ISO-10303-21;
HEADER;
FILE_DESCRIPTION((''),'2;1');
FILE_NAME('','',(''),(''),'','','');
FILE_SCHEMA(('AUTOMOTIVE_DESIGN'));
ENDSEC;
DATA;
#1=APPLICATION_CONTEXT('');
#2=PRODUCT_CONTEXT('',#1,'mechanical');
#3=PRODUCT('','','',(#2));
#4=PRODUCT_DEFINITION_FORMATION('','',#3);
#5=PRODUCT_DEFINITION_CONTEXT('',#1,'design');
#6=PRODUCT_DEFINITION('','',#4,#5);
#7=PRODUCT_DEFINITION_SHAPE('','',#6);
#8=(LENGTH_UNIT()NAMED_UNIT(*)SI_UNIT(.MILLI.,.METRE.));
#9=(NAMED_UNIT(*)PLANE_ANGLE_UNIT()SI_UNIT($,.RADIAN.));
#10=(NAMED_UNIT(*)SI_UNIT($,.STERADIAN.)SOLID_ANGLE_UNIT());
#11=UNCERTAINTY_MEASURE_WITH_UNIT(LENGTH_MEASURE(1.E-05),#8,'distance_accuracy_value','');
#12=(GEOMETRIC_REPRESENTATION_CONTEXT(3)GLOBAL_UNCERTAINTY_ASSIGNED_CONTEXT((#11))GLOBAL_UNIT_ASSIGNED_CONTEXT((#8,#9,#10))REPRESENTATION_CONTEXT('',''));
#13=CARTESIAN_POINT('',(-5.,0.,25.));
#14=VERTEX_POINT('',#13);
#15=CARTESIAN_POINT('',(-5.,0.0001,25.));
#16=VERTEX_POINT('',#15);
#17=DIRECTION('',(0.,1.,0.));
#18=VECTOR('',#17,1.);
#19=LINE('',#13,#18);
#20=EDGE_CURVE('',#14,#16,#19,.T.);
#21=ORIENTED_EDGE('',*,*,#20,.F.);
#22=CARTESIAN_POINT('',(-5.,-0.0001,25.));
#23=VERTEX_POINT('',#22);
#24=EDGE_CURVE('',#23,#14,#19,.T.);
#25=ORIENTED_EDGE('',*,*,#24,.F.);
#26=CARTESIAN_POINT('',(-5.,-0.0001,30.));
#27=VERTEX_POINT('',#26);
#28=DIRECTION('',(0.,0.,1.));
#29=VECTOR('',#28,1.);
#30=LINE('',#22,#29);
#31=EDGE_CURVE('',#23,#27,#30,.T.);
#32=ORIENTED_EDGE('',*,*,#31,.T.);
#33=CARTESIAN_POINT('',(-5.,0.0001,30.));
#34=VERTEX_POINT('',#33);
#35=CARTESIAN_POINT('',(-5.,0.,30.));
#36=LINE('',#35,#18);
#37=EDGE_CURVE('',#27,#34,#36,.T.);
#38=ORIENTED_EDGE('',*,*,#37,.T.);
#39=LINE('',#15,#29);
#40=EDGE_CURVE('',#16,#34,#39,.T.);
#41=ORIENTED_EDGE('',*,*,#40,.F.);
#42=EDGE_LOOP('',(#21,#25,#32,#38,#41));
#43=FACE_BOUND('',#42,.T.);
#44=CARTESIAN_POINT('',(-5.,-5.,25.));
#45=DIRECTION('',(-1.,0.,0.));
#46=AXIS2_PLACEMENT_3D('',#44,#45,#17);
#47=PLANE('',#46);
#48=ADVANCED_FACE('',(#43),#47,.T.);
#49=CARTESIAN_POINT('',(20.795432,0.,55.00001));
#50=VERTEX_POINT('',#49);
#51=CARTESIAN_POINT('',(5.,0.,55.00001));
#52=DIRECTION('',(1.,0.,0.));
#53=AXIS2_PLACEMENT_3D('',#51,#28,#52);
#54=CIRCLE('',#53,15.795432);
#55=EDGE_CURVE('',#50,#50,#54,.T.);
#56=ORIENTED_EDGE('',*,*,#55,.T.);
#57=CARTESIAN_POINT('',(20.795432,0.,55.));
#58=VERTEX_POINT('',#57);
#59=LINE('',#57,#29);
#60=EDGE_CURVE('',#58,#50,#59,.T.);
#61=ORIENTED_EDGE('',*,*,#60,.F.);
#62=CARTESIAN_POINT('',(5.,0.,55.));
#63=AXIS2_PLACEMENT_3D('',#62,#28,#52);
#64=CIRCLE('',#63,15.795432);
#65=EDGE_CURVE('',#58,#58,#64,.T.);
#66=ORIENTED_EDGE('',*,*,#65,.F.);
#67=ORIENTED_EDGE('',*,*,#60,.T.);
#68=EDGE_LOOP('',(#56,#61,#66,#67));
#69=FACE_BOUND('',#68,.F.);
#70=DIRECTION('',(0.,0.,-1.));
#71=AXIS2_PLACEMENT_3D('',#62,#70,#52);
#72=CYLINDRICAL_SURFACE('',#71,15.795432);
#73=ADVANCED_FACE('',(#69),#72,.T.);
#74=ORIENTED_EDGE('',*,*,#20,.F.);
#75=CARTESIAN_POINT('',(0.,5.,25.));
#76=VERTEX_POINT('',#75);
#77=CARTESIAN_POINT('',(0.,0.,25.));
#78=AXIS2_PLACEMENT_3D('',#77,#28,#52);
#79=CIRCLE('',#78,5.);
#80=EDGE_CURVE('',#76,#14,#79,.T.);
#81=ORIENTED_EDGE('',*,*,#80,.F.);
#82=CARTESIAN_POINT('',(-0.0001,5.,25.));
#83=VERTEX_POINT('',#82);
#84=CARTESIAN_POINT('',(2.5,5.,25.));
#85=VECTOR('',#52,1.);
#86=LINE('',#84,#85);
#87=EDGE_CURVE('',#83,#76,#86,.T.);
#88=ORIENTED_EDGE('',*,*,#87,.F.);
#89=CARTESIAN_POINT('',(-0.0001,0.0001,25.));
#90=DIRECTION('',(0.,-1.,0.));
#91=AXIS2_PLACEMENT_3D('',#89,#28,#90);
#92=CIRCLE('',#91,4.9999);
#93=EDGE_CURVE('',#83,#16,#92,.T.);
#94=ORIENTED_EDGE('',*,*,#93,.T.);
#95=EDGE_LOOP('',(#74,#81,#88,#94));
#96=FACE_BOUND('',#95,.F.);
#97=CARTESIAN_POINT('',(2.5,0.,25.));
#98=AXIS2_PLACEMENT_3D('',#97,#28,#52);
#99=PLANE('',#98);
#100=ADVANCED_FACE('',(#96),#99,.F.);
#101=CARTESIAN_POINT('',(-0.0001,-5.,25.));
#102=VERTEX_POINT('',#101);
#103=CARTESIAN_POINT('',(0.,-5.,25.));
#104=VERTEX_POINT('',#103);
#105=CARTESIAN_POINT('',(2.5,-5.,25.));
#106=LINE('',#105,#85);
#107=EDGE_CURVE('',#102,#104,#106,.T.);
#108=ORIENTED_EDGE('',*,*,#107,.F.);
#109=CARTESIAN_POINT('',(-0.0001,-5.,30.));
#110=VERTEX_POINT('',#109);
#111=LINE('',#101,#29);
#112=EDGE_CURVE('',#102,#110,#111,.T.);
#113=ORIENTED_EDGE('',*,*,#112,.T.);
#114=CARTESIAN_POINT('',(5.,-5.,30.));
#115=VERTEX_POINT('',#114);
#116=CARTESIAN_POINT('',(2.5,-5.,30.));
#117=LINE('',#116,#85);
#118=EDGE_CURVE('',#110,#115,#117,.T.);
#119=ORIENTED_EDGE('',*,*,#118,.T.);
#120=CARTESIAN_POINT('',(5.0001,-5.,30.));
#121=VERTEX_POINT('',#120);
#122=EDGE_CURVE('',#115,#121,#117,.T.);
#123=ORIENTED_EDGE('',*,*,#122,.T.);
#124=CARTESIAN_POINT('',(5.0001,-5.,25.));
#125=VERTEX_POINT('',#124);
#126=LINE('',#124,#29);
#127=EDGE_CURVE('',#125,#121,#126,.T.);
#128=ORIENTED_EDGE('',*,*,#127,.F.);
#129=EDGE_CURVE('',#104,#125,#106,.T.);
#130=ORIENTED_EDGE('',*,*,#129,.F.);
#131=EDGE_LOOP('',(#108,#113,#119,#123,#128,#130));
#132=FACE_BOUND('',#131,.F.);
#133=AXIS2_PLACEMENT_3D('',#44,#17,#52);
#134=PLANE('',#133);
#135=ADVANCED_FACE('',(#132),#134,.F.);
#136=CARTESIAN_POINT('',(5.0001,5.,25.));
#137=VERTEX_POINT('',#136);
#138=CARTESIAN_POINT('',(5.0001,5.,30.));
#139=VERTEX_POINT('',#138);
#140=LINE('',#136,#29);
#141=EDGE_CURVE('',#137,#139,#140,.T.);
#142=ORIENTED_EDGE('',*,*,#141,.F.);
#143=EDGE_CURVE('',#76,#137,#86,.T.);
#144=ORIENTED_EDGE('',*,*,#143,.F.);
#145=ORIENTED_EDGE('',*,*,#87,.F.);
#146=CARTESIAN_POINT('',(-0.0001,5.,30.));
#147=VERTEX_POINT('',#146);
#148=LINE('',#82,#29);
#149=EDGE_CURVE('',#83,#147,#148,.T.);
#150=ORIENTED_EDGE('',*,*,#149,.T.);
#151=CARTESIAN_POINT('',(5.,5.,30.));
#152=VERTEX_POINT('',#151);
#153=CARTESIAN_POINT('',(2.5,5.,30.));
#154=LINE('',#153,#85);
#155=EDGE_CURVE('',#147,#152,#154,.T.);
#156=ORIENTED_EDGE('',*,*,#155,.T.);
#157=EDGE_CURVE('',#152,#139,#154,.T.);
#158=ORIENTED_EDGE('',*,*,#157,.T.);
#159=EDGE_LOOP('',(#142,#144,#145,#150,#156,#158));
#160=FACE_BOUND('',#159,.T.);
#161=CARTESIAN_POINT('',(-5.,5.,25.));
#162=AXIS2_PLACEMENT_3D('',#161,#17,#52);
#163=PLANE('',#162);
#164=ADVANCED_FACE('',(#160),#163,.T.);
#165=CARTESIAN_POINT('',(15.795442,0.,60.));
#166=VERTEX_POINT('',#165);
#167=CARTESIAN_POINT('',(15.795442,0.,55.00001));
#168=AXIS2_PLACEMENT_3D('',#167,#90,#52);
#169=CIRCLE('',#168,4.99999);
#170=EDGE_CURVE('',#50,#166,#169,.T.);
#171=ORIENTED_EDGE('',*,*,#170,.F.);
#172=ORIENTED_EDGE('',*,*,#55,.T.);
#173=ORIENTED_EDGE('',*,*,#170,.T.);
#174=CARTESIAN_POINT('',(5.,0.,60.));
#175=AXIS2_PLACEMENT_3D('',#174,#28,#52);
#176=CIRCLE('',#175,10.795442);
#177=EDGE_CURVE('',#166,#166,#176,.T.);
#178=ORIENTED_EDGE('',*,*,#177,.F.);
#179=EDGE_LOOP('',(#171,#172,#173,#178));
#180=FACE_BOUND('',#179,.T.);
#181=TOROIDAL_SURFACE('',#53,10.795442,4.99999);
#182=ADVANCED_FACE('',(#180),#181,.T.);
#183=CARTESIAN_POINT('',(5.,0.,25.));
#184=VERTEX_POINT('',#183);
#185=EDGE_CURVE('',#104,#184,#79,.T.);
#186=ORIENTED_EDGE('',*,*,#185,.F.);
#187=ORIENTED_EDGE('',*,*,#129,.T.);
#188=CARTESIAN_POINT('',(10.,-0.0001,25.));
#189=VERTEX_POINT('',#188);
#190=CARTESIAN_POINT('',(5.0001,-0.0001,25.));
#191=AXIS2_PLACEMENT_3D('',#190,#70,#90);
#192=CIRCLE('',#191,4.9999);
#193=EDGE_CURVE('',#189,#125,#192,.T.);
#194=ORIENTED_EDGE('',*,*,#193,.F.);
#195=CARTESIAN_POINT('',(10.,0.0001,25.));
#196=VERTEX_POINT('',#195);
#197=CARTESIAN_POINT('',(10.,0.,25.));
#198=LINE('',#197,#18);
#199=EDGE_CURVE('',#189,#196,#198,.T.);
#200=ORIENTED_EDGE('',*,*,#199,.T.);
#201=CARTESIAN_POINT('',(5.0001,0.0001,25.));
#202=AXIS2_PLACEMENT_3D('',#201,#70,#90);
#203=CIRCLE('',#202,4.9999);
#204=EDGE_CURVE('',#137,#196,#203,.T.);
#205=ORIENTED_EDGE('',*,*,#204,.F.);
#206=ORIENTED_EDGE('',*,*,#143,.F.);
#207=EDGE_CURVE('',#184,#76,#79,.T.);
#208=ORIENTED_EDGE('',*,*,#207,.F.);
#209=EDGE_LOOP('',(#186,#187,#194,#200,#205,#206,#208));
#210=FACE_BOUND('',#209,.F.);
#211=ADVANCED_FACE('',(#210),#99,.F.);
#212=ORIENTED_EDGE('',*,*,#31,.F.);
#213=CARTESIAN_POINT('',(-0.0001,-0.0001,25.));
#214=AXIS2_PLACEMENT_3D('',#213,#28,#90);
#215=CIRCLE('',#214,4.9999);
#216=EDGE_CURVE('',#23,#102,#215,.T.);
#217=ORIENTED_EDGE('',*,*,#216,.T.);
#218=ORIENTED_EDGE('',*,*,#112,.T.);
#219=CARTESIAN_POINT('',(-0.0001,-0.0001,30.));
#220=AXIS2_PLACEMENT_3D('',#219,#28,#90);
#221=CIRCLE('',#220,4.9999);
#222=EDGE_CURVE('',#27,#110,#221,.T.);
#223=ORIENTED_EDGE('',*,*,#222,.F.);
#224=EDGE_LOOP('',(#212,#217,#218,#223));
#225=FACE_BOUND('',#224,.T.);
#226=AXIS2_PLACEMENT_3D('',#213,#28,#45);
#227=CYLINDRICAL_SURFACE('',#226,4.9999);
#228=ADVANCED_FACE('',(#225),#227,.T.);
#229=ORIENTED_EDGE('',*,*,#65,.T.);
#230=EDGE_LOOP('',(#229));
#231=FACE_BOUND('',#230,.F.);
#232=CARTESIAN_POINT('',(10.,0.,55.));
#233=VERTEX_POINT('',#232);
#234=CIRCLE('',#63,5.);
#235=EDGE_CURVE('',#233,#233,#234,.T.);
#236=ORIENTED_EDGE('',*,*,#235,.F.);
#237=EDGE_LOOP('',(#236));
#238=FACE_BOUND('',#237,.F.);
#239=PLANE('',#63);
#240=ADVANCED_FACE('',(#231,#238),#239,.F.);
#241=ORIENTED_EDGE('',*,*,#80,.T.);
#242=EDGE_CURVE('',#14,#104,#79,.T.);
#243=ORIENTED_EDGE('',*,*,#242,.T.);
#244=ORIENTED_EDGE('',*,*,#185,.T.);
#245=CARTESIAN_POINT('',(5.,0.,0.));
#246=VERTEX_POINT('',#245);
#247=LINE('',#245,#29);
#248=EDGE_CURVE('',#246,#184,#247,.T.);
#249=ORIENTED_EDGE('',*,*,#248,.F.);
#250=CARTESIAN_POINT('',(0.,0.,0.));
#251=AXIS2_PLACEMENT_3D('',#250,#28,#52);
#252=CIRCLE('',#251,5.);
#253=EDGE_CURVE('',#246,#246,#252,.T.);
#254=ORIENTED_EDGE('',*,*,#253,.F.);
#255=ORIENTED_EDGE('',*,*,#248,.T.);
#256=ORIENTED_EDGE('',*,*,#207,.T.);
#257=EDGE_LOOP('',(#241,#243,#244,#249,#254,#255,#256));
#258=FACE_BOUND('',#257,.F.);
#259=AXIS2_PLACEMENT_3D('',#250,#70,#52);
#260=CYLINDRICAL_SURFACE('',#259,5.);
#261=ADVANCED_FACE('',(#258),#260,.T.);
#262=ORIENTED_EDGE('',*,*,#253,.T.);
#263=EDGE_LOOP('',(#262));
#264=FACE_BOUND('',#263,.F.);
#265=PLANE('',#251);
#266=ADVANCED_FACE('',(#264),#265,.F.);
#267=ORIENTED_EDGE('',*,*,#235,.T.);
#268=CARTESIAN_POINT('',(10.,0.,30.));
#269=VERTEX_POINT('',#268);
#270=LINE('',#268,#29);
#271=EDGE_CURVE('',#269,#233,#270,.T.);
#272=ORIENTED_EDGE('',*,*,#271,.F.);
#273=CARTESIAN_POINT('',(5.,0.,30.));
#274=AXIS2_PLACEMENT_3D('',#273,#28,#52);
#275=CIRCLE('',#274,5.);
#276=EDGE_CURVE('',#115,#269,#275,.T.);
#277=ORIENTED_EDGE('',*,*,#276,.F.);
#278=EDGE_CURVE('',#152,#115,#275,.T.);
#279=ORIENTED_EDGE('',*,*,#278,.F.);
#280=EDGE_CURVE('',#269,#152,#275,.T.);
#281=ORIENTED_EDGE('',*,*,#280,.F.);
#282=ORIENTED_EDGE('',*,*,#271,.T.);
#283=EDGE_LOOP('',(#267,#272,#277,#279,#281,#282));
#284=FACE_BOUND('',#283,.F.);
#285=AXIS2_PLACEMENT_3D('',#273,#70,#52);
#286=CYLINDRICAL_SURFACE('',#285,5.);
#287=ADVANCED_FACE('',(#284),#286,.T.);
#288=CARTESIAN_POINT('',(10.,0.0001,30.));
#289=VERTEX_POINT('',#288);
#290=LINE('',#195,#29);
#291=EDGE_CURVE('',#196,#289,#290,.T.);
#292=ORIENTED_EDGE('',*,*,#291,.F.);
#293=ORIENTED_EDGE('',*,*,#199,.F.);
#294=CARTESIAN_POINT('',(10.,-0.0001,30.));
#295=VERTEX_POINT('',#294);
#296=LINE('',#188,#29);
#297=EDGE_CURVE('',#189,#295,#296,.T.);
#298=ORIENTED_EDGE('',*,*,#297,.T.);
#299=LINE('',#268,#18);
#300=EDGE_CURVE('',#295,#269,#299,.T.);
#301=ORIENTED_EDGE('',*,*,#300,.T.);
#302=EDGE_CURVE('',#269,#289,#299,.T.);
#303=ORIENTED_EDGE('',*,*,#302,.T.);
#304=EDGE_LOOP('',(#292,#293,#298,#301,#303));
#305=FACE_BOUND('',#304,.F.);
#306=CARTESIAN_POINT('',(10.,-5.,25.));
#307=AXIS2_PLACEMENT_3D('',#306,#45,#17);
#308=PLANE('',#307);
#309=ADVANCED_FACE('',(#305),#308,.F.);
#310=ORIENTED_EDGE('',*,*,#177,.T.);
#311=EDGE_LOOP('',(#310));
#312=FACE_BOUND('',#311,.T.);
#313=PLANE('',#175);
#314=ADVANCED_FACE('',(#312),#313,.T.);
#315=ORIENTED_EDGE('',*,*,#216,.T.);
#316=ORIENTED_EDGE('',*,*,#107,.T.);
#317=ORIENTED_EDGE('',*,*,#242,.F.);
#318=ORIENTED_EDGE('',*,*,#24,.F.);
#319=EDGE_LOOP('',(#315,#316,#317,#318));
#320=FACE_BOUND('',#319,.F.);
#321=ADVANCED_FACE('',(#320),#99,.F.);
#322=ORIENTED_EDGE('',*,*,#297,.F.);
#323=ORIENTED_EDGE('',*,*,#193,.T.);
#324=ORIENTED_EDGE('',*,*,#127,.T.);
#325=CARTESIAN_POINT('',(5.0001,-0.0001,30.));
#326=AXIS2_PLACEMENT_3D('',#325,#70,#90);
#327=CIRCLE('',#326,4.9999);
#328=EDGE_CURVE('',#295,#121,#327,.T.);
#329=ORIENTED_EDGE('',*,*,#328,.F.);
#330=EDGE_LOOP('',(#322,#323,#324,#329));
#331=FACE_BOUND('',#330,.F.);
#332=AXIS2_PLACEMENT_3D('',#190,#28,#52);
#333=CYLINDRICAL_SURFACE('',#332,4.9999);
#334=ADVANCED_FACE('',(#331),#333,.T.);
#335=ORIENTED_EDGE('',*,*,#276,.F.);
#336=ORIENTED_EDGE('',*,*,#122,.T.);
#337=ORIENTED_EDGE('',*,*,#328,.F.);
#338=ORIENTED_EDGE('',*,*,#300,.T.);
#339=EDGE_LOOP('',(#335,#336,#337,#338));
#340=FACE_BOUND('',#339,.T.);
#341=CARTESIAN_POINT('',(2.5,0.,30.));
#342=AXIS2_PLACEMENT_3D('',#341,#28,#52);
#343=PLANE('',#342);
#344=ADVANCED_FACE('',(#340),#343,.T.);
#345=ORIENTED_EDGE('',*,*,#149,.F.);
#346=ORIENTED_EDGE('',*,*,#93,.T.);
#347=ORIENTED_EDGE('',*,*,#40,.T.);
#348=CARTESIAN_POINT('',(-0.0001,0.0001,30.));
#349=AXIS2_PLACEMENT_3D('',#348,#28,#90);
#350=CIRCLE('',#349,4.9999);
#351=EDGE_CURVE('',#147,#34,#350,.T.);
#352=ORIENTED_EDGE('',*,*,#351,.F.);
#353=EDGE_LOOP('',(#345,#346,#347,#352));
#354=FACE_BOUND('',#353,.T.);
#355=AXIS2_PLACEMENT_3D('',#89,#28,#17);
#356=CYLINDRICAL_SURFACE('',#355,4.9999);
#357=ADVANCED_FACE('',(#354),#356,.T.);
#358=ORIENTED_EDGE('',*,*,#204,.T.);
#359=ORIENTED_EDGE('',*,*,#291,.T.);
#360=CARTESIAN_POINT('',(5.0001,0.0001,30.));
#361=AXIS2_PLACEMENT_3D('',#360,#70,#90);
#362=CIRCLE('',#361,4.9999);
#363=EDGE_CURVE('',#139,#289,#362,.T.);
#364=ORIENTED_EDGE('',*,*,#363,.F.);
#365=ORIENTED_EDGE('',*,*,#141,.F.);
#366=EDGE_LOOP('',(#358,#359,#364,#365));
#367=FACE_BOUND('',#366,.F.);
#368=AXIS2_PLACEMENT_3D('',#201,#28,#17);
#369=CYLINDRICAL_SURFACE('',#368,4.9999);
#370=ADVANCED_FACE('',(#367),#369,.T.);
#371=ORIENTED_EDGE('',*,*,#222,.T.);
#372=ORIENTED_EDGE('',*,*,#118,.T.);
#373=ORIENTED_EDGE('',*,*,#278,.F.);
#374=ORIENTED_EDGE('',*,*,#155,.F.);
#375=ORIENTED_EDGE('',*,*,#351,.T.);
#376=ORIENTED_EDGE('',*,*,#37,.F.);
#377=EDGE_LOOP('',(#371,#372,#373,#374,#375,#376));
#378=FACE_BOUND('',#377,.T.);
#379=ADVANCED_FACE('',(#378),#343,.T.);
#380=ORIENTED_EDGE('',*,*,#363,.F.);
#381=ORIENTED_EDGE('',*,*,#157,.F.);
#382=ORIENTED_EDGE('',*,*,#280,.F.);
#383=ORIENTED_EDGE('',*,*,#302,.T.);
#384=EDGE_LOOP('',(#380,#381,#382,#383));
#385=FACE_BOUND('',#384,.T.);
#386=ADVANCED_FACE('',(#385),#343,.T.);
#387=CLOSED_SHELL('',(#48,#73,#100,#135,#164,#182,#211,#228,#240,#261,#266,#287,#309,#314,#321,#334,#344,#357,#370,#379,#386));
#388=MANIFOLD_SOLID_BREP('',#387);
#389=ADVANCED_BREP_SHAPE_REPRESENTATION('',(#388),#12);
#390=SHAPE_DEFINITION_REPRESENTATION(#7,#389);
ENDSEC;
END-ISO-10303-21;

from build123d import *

# Parameters (mm, degrees)
F0_R     = 5
F1_DEPTH = 25
F2_W     = 15
F2_H     = 10
F3_DEPTH = 5
F4_R     = 5
F5_DEPTH = 25
F6_R     = 4.9999
F7_R     = 15.7954316655
F8_DEPTH = 5
F9_R     = 4.99999


# Not quite as in the source:
# - a fillet or chamfer is up to 0.001 mm smaller than in the source, because OpenCascade refuses the exact size


with BuildPart() as f1:
    # F0 (on Top) → F1 (new body)
    with BuildSketch(Plane.XY):
        Circle(F0_R)
    extrude(amount=F1_DEPTH)

    # F2 (on face) → F3 (join)
    with BuildSketch(Plane.XY.offset(25)):
        with Locations((2.5, 0)):
            Rectangle(F2_W, F2_H)
    extrude(amount=F3_DEPTH)

    # F4 (on face) → F5 (join)
    with BuildSketch(Plane.XY.offset(30)):
        with Locations((5, 0)):
            Circle(F4_R)
    extrude(amount=F5_DEPTH)

    # F6 (radius 5 in the source; OpenCascade refuses exactly that, so slightly less here)
    f6_edges = [f1.edges().sort_by_distance(p)[0] for p in [
        (10, -5, 27.5),
        (10, 5, 27.5),
        (-5, 5, 27.5),
        (-5, -5, 27.5),
    ]]
    fillet(f6_edges, radius=F6_R)

    # F7 (on face) → F8 (join)
    with BuildSketch(Plane.XY.offset(55)):
        with Locations((5, 0)):
            Circle(F7_R)
    extrude(amount=F8_DEPTH)

    # F9 (radius 5 in the source; OpenCascade refuses exactly that, so slightly less here)
    f9_edges = [f1.edges().sort_by_distance(p)[0] for p in [
        (-10.795432, 0, 60),
    ]]
    fillet(f9_edges, radius=F9_R)


solid = f1.part
